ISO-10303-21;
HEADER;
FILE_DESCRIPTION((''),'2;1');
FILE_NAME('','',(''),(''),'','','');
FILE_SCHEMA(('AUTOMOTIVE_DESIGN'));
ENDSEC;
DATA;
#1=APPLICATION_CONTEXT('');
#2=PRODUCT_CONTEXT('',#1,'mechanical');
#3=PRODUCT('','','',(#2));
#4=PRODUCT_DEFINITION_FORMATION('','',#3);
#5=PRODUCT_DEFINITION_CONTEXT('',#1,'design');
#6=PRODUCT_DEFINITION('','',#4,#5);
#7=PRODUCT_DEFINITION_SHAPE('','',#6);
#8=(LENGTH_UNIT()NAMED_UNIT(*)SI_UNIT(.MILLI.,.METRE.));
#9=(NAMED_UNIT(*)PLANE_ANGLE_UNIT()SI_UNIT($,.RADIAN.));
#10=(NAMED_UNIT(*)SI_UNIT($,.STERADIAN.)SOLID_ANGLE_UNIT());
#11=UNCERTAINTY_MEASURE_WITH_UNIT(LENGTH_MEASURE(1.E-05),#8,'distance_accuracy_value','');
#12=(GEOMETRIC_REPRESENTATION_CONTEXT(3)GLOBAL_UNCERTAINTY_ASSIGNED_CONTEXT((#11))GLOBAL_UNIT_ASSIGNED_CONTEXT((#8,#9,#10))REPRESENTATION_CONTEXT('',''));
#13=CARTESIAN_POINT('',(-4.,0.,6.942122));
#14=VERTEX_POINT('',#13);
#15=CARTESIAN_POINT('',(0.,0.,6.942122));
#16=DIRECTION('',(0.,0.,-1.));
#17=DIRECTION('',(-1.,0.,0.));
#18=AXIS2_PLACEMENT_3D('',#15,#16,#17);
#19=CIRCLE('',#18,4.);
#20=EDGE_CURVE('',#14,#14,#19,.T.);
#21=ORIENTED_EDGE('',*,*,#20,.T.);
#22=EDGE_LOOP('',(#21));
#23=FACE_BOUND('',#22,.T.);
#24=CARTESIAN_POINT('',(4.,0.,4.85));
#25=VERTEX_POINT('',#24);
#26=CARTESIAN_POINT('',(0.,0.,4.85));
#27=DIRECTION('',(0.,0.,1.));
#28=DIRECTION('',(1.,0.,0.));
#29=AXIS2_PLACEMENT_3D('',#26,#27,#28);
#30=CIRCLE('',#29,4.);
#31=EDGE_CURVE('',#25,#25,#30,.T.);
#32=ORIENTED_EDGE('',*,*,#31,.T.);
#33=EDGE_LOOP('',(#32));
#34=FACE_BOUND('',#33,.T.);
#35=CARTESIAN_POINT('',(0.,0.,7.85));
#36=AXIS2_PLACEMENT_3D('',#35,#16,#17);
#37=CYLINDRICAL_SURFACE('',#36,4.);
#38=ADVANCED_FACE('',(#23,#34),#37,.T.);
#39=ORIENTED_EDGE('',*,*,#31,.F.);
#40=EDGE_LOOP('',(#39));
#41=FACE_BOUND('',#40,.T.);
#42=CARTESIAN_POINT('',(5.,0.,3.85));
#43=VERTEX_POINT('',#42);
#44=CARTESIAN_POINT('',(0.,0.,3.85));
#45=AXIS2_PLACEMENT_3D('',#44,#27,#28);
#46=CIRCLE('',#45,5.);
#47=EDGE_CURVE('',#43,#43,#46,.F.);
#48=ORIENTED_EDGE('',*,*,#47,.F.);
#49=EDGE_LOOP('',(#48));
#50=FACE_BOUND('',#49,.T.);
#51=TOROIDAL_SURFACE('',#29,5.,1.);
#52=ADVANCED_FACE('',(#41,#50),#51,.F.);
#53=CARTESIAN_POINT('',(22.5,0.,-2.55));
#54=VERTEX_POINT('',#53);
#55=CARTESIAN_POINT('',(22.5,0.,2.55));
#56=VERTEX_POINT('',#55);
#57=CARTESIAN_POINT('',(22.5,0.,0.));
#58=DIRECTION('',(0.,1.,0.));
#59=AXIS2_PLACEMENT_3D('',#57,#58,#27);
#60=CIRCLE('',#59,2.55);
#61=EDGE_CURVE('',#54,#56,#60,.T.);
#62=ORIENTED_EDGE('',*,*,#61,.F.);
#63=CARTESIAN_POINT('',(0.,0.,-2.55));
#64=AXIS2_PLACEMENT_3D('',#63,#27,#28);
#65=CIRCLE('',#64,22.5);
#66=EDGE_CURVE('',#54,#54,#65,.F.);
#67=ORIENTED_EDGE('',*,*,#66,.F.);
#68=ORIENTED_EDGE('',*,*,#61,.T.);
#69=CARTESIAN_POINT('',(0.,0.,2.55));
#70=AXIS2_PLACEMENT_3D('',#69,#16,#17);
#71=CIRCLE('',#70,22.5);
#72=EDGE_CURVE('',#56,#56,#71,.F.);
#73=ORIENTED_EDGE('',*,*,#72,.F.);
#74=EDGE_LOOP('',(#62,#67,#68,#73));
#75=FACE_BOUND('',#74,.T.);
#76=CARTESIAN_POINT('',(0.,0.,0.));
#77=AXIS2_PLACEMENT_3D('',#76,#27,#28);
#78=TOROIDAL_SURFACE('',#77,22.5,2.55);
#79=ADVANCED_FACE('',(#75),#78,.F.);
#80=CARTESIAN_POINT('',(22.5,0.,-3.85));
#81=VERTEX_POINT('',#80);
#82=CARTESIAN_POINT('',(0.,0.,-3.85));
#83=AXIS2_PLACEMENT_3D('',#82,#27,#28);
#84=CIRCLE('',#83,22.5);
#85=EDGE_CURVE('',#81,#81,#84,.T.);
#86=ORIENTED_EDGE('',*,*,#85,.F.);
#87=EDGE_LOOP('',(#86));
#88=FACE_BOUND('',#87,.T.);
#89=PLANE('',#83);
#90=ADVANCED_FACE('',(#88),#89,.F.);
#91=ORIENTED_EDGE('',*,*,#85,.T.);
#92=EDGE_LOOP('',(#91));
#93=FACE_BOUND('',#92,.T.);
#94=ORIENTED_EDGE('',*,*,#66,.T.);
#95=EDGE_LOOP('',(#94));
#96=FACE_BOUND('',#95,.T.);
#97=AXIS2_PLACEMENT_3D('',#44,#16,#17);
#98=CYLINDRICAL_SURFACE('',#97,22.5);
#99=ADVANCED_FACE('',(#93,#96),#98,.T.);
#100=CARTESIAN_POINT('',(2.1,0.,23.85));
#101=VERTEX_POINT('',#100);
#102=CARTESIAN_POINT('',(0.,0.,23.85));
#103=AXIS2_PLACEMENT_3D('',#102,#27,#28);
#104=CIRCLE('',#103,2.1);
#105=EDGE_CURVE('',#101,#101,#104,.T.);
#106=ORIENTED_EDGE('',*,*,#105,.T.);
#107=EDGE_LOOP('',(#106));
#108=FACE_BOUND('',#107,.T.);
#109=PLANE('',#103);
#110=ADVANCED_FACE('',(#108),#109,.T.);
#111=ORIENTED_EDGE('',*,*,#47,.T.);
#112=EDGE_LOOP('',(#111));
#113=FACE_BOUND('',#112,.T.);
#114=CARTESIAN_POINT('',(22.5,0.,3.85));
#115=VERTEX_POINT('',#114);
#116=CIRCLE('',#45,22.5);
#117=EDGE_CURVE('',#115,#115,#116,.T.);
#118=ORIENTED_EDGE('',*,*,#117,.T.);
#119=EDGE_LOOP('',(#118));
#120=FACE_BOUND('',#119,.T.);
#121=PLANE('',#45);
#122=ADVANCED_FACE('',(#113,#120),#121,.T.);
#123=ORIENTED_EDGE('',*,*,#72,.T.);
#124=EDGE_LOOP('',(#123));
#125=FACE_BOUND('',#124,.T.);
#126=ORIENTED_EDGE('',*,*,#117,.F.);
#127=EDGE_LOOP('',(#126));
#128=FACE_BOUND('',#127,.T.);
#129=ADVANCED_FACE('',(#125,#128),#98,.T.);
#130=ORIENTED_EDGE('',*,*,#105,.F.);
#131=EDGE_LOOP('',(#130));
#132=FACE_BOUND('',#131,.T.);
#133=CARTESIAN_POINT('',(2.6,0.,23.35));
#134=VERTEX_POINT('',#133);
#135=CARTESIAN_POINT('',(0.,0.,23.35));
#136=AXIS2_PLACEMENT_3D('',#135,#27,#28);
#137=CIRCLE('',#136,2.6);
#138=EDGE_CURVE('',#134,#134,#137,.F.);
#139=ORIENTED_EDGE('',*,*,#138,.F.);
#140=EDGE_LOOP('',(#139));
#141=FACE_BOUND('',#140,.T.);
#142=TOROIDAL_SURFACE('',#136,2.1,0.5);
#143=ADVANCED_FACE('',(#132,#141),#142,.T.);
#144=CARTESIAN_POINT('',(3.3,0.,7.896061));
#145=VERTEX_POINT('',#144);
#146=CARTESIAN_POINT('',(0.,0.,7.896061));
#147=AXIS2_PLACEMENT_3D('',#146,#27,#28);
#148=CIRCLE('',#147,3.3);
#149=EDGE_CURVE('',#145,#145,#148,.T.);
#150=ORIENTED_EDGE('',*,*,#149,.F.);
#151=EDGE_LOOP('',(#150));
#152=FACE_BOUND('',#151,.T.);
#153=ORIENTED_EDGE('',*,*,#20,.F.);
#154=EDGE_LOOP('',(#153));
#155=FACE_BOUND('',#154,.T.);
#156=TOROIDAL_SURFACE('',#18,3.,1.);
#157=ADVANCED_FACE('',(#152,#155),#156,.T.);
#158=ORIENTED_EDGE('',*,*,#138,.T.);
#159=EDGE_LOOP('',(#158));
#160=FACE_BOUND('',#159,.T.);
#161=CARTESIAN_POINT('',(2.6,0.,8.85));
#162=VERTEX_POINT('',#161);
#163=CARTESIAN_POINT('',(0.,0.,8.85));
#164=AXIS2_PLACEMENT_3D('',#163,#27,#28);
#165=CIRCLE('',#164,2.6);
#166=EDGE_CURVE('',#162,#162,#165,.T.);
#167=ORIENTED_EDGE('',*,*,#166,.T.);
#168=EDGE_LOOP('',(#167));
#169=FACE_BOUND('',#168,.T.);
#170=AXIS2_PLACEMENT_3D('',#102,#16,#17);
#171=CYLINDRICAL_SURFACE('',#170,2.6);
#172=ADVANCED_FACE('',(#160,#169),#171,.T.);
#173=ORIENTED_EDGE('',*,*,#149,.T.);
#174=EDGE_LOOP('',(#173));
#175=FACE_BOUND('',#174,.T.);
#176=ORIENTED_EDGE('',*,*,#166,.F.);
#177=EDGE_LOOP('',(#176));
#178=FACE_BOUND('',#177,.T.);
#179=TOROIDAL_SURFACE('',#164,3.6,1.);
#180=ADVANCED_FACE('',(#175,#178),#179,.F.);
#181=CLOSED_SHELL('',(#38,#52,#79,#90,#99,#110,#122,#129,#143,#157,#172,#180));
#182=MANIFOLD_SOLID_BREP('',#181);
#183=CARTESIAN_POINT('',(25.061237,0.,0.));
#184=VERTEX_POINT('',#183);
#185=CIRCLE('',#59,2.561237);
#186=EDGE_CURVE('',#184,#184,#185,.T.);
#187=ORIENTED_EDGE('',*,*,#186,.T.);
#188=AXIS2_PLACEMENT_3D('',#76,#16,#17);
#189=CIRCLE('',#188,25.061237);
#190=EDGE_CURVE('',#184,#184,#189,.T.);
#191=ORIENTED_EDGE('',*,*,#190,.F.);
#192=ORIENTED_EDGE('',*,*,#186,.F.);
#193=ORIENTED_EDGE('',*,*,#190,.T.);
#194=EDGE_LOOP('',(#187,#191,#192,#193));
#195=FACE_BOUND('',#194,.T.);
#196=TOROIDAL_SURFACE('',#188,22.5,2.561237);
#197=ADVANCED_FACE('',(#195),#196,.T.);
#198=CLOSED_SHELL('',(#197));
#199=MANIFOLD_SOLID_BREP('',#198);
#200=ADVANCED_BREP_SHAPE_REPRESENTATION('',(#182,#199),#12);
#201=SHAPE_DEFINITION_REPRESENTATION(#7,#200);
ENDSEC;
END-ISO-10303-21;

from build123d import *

# Parameters (mm, degrees)
SKETCH1_R           = 22.5
BOSS_EXTRUDE1_DEPTH = 3.85
SWEEP1_OUTLINE_R    = 2.561236926
SKETCH4_R           = 4
BOSS_EXTRUDE2_DEPTH = 4
FILLET1_R           = 1
SKETCH5_R           = 2.6
BOSS_EXTRUDE3_DEPTH = 16
FILLET2_R           = 1
FILLET3_R           = 1
FILLET4_R           = 0.5


# Read off the part's stored shape, not the designer's step: Cut-Sweep1, Sweep1
with BuildPart() as part:
    # Sketch1 → Boss-Extrude1 (new, symmetric)
    with BuildSketch(Plane.XY):
        with Locations(Location((0, 0, 0), (0, 0, 180))):
            Circle(SKETCH1_R)
    extrude(amount=BOSS_EXTRUDE1_DEPTH, both=True)

    # Cut-Sweep1 outline → Cut-Sweep1 (revolve, cut)
    with BuildSketch(Plane.XZ):
        with BuildLine():
            Line((22.5, -2.55), (22.5, 2.55))
            ThreePointArc((22.5, 2.55), (19.95, 0), (22.5, -2.55))
        make_face()
    revolve(axis=Axis((0, 0, 0), (0, 0, 1)), mode=Mode.SUBTRACT)

    # Sketch4 → Boss-Extrude2 (add)
    with BuildSketch(Plane.XY.offset(3.85)):
        Circle(SKETCH4_R)
    extrude(amount=BOSS_EXTRUDE2_DEPTH)

    # Fillet1
    fillet1_edges = [part.edges().sort_by_distance(p)[0] for p in [
        (-4, 0, 3.85),
    ]]
    fillet(fillet1_edges, radius=FILLET1_R)

    # Sketch5 → Boss-Extrude3 (add)
    with BuildSketch(Plane.XY.offset(7.85)):
        Circle(SKETCH5_R)
    extrude(amount=BOSS_EXTRUDE3_DEPTH)

    # Fillet2
    fillet2_edges = [part.edges().sort_by_distance(p)[0] for p in [
        (-2.6, 0, 7.85),
    ]]
    fillet(fillet2_edges, radius=FILLET2_R)

    # Fillet3
    fillet3_edges = [part.edges().sort_by_distance(p)[0] for p in [
        (-4, 0, 7.85),
    ]]
    fillet(fillet3_edges, radius=FILLET3_R)

    # Fillet4
    fillet4_edges = [part.edges().sort_by_distance(p)[0] for p in [
        (-2.6, 0, 23.85),
    ]]
    fillet(fillet4_edges, radius=FILLET4_R)


with BuildPart() as body_2:
    # Sweep1 outline → Sweep1 (revolve)
    with BuildSketch(Plane.XZ):
        with Locations((22.5, 0)):
            Circle(SWEEP1_OUTLINE_R)
    revolve(axis=Axis((0, 0, 0), (0, 0, 1)))


solid = Compound([part.part, body_2.part])
